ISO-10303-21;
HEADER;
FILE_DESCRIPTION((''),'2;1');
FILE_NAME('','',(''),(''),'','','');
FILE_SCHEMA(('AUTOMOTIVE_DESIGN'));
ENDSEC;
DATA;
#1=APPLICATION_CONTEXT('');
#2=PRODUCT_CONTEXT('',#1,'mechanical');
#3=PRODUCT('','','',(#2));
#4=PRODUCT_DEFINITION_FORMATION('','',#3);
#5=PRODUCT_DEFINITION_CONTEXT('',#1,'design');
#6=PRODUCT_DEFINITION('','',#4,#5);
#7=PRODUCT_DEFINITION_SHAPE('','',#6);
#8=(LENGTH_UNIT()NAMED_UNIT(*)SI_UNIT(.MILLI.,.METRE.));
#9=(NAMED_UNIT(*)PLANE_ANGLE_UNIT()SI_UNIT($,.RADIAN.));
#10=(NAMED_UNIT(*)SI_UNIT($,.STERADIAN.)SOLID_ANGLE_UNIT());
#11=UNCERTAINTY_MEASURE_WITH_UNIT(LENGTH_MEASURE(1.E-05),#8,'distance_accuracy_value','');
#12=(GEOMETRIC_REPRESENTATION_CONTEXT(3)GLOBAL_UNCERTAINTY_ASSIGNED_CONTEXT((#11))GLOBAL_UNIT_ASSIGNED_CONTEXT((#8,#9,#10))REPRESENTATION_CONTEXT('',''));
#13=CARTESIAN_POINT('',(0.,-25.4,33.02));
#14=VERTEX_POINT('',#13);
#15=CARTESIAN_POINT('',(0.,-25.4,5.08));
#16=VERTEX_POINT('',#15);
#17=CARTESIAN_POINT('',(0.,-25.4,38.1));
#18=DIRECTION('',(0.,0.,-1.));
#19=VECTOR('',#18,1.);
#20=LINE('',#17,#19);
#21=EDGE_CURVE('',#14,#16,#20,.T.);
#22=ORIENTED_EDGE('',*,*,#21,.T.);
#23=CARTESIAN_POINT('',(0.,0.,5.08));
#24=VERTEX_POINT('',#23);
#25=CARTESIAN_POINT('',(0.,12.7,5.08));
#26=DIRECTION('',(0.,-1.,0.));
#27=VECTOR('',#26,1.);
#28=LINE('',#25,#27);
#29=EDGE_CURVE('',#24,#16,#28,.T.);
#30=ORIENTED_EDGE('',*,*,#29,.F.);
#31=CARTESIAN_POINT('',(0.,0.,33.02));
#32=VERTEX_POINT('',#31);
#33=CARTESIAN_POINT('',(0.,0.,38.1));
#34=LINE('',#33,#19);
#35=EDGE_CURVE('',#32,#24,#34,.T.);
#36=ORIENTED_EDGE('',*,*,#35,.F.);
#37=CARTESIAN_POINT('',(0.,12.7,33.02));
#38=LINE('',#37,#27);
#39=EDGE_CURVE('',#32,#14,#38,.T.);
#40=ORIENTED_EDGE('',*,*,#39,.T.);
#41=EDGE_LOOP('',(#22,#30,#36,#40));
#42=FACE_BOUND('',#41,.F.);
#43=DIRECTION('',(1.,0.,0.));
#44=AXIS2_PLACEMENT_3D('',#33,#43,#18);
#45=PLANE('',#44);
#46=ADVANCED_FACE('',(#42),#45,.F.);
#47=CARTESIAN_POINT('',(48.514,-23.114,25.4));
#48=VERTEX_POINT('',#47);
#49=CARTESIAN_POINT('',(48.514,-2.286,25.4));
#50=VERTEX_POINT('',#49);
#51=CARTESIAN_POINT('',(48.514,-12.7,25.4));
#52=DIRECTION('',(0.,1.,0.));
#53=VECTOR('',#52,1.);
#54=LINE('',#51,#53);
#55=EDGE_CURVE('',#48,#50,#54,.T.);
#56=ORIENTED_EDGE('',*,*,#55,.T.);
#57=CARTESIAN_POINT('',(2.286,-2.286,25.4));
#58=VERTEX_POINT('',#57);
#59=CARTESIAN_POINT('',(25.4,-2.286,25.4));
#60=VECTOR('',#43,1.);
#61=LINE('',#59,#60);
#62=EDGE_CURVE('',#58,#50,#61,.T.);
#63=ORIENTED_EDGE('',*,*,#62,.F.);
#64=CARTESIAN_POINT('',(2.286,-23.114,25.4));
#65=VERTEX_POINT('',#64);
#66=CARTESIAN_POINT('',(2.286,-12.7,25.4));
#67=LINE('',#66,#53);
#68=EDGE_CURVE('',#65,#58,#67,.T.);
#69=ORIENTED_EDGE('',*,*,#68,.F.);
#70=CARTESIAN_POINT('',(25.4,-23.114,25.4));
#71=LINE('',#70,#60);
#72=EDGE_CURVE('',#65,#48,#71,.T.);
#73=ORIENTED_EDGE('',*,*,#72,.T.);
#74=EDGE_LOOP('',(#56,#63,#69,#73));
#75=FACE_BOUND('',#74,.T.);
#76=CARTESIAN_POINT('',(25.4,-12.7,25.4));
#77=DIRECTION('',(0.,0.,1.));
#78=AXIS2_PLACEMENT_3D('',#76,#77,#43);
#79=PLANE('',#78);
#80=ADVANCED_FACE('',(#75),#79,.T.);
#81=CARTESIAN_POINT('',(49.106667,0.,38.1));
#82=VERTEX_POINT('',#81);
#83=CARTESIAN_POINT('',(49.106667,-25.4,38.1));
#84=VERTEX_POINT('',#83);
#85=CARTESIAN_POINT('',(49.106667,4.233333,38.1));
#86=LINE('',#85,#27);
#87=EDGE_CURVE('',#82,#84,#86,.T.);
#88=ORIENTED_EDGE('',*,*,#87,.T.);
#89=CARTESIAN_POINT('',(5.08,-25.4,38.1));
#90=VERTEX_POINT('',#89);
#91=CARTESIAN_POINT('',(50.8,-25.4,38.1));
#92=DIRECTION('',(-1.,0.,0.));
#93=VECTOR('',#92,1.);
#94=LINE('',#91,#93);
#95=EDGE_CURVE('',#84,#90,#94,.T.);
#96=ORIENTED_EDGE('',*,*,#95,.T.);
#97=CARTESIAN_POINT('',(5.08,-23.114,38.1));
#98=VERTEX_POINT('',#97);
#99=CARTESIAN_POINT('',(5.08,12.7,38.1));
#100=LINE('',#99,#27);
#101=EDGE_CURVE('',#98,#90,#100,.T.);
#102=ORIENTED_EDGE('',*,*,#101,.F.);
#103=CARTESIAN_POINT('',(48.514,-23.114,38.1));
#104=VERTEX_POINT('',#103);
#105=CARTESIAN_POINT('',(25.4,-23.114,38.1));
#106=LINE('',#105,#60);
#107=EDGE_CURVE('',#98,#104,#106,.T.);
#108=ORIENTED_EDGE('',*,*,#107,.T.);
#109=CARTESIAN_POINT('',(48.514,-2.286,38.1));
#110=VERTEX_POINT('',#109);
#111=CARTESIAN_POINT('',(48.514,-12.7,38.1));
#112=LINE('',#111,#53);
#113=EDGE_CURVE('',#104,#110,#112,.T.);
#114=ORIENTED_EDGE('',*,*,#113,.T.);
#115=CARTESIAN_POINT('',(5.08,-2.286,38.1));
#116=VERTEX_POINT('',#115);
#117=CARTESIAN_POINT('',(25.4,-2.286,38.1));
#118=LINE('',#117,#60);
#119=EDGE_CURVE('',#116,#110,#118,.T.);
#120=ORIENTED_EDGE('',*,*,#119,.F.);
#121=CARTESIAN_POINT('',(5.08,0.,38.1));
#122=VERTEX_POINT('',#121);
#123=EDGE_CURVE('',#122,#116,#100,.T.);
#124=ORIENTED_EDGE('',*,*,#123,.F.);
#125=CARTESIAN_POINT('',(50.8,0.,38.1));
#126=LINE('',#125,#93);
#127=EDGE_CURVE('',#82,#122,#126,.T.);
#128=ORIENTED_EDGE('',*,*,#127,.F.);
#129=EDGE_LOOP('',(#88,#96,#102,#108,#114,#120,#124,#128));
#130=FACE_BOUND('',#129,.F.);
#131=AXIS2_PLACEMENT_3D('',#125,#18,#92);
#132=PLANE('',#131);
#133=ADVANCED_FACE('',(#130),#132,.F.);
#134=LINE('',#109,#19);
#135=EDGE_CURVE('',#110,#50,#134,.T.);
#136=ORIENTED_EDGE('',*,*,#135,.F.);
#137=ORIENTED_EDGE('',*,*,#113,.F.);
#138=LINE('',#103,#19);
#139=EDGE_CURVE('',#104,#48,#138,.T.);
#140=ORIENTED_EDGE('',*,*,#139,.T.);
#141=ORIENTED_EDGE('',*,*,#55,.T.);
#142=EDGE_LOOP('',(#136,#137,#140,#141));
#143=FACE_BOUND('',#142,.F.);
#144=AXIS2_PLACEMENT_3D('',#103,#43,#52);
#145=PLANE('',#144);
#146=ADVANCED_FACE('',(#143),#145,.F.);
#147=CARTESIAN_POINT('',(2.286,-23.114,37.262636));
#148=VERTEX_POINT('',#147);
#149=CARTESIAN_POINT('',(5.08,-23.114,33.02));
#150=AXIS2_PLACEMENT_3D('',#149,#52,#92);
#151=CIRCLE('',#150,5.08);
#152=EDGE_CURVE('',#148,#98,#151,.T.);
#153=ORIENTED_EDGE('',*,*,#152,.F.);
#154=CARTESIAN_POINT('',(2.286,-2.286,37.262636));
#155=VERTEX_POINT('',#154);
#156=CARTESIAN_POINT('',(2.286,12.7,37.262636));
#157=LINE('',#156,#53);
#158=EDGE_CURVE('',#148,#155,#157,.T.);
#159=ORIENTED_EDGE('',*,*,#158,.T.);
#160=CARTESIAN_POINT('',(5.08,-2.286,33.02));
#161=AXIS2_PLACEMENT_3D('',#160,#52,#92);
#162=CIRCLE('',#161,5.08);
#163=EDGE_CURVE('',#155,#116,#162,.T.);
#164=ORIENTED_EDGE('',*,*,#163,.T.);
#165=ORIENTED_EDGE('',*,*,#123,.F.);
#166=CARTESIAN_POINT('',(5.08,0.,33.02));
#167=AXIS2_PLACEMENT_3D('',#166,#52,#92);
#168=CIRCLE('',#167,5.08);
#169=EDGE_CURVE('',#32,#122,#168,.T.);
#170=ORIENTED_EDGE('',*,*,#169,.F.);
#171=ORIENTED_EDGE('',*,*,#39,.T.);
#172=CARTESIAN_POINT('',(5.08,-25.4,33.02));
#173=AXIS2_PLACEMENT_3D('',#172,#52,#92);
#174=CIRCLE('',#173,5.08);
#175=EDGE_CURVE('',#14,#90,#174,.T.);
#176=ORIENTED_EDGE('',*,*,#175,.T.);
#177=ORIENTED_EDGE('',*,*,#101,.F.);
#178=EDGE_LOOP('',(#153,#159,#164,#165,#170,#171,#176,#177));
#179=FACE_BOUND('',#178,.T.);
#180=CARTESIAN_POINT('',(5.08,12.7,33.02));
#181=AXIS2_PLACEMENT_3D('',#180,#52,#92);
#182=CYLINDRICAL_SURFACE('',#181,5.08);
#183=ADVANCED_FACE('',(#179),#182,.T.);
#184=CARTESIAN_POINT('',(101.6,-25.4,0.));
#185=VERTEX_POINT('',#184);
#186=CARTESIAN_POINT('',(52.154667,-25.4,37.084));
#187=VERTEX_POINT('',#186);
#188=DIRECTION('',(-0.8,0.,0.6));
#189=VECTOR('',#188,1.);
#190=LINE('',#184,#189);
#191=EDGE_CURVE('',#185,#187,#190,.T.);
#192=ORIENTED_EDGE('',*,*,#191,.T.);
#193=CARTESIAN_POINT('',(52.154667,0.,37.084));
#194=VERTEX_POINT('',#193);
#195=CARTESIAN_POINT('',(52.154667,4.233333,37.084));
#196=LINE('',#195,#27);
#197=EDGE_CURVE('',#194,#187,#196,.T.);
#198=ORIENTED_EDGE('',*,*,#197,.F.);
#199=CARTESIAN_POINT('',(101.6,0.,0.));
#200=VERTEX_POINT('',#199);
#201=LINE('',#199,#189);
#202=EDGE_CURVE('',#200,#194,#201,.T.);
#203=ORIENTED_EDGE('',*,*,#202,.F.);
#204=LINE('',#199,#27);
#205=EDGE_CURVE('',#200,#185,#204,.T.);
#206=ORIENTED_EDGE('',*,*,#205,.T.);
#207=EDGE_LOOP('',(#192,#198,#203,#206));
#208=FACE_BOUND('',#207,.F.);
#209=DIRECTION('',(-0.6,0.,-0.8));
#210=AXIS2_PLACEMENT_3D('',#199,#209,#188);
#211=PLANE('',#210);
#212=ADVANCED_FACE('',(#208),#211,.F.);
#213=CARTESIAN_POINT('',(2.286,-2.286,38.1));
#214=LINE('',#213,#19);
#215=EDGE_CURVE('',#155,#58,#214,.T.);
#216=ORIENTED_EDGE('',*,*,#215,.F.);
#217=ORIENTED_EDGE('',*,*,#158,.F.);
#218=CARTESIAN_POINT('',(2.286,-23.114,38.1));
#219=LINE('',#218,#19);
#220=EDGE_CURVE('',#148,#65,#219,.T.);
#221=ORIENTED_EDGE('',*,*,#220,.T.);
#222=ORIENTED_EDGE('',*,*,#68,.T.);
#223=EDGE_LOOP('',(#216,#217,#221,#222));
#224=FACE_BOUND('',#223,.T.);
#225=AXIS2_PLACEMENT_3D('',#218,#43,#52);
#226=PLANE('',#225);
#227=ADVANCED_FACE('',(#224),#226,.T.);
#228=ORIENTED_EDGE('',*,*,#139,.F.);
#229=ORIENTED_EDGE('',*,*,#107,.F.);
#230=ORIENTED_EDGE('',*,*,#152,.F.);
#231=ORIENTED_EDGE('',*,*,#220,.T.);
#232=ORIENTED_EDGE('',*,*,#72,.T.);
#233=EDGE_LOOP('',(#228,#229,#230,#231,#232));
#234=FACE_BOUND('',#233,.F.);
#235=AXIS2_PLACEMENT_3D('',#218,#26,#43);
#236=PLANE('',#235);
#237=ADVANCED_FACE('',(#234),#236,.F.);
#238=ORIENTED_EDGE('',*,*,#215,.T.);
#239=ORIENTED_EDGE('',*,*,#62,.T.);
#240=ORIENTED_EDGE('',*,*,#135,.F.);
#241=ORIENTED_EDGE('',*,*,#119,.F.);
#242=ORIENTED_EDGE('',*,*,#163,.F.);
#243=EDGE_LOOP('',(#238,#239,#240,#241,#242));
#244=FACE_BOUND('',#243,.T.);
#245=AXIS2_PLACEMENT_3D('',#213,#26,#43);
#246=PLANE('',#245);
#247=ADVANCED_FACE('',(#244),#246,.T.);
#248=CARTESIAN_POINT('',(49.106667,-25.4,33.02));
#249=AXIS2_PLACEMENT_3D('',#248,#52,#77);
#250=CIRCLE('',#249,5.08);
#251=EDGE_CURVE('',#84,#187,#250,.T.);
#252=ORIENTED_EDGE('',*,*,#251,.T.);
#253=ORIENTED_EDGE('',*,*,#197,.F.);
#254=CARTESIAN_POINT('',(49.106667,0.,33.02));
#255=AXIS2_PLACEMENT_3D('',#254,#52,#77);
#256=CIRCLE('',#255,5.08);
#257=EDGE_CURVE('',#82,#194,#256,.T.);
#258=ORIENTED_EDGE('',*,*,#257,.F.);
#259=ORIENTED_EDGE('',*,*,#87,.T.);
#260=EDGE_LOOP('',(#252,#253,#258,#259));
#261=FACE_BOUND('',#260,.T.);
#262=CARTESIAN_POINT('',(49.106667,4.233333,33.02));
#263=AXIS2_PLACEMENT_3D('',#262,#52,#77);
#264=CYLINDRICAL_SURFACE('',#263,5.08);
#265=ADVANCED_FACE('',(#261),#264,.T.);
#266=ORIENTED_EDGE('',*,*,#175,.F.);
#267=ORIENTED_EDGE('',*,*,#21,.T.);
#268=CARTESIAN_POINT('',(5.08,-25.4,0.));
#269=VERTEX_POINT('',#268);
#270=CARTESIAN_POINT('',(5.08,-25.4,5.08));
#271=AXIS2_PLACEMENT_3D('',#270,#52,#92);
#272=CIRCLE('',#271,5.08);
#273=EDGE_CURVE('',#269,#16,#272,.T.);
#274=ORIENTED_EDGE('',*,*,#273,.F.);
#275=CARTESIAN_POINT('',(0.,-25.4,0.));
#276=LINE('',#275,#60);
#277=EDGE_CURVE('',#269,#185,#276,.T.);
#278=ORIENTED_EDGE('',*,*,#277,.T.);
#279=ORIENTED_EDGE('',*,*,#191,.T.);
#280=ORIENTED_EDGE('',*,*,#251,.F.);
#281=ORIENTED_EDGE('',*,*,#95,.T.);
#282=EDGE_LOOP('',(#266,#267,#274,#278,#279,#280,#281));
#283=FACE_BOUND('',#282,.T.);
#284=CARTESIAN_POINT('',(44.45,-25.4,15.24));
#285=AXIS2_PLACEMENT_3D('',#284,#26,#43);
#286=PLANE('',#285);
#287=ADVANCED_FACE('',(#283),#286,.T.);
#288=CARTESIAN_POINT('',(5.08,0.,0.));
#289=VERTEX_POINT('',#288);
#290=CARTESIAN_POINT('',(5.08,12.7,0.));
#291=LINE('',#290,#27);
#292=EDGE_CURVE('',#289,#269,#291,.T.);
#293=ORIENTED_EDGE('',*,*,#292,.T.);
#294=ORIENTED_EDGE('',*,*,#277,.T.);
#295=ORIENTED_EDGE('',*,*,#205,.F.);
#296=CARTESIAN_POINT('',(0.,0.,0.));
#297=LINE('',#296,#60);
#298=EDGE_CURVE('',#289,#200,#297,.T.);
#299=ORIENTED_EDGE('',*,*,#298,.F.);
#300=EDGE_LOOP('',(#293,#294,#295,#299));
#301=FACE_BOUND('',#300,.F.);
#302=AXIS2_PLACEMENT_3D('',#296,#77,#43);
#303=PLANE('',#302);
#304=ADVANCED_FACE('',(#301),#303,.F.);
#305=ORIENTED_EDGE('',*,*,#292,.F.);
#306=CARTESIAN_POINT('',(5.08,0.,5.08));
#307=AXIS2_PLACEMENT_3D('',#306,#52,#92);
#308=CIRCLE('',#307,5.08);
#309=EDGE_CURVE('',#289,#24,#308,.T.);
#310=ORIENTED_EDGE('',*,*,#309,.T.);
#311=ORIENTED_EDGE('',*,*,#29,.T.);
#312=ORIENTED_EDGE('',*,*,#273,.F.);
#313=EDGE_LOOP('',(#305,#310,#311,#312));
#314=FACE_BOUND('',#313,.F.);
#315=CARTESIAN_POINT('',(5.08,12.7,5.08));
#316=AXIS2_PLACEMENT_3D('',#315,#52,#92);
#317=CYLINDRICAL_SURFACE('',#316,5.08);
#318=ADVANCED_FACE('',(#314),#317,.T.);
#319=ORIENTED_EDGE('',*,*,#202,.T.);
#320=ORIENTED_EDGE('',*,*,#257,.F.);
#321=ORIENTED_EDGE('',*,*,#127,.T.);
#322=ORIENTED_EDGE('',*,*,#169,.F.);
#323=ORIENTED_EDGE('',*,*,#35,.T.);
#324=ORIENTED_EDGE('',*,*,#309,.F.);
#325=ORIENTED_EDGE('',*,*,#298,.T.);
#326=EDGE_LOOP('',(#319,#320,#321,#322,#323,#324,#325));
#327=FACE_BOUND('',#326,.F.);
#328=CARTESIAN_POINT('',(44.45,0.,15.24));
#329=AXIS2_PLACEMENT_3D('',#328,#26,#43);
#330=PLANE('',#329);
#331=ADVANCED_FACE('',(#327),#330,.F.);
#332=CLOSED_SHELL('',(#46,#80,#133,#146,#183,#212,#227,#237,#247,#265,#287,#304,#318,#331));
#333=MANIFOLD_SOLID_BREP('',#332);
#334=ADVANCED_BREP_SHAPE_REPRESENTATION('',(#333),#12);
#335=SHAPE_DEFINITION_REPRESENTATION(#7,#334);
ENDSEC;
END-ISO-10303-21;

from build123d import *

# Parameters (mm, degrees)
F1_DEPTH    = 25.4
F2_W        = 46.228
F2_H        = 20.828
F3_DEPTH    = 12.7
F4_T1_DEPTH = 50.8
F4_T3_DEPTH = 33.8666666667


# Not quite as in the source:
# - a fillet or chamfer that OpenCascade refuses, or shapes differently, is made with other operations: its cross-section is extruded or revolved along the edge and cut away or added


with BuildPart() as f1:
    # F0 (on Front) → F1 (new body)
    with BuildSketch(Plane.XZ):
        Polygon((0, 38.1), (0, 0), (101.6, 0), (50.8, 38.1), align=None)
    extrude(amount=F1_DEPTH)

    # F2 (on face) → F3 (cut)
    with BuildSketch(Plane.XY.offset(38.1)):
        with Locations((25.4, -12.7)):
            Rectangle(F2_W, F2_H)
    extrude(amount=-F3_DEPTH, mode=Mode.SUBTRACT)

    # F4: fillet of radius 5.08 on 3 edges, made by hand

    # F4_s2 → F4_t1 (cut)
    with BuildSketch(Plane.XZ.offset(-12.7)):
        with BuildLine():
            ThreePointArc((0, 33.02), (1.4878975516, 36.6121024484), (5.08, 38.1))
            Line((5.08, 38.1), (0, 38.1))
            Line((0, 38.1), (0, 33.02))
        make_face()
        with BuildLine():
            ThreePointArc((0, 5.08), (1.4878975516, 1.4878975516), (5.08, 0))
            Line((5.08, 0), (0, 0))
            Line((0, 0), (0, 5.08))
        make_face()
    extrude(amount=F4_T1_DEPTH, mode=Mode.SUBTRACT)

    # F4_s4 → F4_t3 (cut)
    with BuildSketch(Plane.XZ.offset(-4.2333333333)):
        with BuildLine():
            ThreePointArc((49.1066666667, 38.1), (50.713103718, 37.8393111541), (52.1546666667, 37.084))
            Line((52.1546666667, 37.084), (50.8, 38.1))
            Line((50.8, 38.1), (49.1066666667, 38.1))
        make_face()
    extrude(amount=F4_T3_DEPTH, mode=Mode.SUBTRACT)


solid = f1.part
